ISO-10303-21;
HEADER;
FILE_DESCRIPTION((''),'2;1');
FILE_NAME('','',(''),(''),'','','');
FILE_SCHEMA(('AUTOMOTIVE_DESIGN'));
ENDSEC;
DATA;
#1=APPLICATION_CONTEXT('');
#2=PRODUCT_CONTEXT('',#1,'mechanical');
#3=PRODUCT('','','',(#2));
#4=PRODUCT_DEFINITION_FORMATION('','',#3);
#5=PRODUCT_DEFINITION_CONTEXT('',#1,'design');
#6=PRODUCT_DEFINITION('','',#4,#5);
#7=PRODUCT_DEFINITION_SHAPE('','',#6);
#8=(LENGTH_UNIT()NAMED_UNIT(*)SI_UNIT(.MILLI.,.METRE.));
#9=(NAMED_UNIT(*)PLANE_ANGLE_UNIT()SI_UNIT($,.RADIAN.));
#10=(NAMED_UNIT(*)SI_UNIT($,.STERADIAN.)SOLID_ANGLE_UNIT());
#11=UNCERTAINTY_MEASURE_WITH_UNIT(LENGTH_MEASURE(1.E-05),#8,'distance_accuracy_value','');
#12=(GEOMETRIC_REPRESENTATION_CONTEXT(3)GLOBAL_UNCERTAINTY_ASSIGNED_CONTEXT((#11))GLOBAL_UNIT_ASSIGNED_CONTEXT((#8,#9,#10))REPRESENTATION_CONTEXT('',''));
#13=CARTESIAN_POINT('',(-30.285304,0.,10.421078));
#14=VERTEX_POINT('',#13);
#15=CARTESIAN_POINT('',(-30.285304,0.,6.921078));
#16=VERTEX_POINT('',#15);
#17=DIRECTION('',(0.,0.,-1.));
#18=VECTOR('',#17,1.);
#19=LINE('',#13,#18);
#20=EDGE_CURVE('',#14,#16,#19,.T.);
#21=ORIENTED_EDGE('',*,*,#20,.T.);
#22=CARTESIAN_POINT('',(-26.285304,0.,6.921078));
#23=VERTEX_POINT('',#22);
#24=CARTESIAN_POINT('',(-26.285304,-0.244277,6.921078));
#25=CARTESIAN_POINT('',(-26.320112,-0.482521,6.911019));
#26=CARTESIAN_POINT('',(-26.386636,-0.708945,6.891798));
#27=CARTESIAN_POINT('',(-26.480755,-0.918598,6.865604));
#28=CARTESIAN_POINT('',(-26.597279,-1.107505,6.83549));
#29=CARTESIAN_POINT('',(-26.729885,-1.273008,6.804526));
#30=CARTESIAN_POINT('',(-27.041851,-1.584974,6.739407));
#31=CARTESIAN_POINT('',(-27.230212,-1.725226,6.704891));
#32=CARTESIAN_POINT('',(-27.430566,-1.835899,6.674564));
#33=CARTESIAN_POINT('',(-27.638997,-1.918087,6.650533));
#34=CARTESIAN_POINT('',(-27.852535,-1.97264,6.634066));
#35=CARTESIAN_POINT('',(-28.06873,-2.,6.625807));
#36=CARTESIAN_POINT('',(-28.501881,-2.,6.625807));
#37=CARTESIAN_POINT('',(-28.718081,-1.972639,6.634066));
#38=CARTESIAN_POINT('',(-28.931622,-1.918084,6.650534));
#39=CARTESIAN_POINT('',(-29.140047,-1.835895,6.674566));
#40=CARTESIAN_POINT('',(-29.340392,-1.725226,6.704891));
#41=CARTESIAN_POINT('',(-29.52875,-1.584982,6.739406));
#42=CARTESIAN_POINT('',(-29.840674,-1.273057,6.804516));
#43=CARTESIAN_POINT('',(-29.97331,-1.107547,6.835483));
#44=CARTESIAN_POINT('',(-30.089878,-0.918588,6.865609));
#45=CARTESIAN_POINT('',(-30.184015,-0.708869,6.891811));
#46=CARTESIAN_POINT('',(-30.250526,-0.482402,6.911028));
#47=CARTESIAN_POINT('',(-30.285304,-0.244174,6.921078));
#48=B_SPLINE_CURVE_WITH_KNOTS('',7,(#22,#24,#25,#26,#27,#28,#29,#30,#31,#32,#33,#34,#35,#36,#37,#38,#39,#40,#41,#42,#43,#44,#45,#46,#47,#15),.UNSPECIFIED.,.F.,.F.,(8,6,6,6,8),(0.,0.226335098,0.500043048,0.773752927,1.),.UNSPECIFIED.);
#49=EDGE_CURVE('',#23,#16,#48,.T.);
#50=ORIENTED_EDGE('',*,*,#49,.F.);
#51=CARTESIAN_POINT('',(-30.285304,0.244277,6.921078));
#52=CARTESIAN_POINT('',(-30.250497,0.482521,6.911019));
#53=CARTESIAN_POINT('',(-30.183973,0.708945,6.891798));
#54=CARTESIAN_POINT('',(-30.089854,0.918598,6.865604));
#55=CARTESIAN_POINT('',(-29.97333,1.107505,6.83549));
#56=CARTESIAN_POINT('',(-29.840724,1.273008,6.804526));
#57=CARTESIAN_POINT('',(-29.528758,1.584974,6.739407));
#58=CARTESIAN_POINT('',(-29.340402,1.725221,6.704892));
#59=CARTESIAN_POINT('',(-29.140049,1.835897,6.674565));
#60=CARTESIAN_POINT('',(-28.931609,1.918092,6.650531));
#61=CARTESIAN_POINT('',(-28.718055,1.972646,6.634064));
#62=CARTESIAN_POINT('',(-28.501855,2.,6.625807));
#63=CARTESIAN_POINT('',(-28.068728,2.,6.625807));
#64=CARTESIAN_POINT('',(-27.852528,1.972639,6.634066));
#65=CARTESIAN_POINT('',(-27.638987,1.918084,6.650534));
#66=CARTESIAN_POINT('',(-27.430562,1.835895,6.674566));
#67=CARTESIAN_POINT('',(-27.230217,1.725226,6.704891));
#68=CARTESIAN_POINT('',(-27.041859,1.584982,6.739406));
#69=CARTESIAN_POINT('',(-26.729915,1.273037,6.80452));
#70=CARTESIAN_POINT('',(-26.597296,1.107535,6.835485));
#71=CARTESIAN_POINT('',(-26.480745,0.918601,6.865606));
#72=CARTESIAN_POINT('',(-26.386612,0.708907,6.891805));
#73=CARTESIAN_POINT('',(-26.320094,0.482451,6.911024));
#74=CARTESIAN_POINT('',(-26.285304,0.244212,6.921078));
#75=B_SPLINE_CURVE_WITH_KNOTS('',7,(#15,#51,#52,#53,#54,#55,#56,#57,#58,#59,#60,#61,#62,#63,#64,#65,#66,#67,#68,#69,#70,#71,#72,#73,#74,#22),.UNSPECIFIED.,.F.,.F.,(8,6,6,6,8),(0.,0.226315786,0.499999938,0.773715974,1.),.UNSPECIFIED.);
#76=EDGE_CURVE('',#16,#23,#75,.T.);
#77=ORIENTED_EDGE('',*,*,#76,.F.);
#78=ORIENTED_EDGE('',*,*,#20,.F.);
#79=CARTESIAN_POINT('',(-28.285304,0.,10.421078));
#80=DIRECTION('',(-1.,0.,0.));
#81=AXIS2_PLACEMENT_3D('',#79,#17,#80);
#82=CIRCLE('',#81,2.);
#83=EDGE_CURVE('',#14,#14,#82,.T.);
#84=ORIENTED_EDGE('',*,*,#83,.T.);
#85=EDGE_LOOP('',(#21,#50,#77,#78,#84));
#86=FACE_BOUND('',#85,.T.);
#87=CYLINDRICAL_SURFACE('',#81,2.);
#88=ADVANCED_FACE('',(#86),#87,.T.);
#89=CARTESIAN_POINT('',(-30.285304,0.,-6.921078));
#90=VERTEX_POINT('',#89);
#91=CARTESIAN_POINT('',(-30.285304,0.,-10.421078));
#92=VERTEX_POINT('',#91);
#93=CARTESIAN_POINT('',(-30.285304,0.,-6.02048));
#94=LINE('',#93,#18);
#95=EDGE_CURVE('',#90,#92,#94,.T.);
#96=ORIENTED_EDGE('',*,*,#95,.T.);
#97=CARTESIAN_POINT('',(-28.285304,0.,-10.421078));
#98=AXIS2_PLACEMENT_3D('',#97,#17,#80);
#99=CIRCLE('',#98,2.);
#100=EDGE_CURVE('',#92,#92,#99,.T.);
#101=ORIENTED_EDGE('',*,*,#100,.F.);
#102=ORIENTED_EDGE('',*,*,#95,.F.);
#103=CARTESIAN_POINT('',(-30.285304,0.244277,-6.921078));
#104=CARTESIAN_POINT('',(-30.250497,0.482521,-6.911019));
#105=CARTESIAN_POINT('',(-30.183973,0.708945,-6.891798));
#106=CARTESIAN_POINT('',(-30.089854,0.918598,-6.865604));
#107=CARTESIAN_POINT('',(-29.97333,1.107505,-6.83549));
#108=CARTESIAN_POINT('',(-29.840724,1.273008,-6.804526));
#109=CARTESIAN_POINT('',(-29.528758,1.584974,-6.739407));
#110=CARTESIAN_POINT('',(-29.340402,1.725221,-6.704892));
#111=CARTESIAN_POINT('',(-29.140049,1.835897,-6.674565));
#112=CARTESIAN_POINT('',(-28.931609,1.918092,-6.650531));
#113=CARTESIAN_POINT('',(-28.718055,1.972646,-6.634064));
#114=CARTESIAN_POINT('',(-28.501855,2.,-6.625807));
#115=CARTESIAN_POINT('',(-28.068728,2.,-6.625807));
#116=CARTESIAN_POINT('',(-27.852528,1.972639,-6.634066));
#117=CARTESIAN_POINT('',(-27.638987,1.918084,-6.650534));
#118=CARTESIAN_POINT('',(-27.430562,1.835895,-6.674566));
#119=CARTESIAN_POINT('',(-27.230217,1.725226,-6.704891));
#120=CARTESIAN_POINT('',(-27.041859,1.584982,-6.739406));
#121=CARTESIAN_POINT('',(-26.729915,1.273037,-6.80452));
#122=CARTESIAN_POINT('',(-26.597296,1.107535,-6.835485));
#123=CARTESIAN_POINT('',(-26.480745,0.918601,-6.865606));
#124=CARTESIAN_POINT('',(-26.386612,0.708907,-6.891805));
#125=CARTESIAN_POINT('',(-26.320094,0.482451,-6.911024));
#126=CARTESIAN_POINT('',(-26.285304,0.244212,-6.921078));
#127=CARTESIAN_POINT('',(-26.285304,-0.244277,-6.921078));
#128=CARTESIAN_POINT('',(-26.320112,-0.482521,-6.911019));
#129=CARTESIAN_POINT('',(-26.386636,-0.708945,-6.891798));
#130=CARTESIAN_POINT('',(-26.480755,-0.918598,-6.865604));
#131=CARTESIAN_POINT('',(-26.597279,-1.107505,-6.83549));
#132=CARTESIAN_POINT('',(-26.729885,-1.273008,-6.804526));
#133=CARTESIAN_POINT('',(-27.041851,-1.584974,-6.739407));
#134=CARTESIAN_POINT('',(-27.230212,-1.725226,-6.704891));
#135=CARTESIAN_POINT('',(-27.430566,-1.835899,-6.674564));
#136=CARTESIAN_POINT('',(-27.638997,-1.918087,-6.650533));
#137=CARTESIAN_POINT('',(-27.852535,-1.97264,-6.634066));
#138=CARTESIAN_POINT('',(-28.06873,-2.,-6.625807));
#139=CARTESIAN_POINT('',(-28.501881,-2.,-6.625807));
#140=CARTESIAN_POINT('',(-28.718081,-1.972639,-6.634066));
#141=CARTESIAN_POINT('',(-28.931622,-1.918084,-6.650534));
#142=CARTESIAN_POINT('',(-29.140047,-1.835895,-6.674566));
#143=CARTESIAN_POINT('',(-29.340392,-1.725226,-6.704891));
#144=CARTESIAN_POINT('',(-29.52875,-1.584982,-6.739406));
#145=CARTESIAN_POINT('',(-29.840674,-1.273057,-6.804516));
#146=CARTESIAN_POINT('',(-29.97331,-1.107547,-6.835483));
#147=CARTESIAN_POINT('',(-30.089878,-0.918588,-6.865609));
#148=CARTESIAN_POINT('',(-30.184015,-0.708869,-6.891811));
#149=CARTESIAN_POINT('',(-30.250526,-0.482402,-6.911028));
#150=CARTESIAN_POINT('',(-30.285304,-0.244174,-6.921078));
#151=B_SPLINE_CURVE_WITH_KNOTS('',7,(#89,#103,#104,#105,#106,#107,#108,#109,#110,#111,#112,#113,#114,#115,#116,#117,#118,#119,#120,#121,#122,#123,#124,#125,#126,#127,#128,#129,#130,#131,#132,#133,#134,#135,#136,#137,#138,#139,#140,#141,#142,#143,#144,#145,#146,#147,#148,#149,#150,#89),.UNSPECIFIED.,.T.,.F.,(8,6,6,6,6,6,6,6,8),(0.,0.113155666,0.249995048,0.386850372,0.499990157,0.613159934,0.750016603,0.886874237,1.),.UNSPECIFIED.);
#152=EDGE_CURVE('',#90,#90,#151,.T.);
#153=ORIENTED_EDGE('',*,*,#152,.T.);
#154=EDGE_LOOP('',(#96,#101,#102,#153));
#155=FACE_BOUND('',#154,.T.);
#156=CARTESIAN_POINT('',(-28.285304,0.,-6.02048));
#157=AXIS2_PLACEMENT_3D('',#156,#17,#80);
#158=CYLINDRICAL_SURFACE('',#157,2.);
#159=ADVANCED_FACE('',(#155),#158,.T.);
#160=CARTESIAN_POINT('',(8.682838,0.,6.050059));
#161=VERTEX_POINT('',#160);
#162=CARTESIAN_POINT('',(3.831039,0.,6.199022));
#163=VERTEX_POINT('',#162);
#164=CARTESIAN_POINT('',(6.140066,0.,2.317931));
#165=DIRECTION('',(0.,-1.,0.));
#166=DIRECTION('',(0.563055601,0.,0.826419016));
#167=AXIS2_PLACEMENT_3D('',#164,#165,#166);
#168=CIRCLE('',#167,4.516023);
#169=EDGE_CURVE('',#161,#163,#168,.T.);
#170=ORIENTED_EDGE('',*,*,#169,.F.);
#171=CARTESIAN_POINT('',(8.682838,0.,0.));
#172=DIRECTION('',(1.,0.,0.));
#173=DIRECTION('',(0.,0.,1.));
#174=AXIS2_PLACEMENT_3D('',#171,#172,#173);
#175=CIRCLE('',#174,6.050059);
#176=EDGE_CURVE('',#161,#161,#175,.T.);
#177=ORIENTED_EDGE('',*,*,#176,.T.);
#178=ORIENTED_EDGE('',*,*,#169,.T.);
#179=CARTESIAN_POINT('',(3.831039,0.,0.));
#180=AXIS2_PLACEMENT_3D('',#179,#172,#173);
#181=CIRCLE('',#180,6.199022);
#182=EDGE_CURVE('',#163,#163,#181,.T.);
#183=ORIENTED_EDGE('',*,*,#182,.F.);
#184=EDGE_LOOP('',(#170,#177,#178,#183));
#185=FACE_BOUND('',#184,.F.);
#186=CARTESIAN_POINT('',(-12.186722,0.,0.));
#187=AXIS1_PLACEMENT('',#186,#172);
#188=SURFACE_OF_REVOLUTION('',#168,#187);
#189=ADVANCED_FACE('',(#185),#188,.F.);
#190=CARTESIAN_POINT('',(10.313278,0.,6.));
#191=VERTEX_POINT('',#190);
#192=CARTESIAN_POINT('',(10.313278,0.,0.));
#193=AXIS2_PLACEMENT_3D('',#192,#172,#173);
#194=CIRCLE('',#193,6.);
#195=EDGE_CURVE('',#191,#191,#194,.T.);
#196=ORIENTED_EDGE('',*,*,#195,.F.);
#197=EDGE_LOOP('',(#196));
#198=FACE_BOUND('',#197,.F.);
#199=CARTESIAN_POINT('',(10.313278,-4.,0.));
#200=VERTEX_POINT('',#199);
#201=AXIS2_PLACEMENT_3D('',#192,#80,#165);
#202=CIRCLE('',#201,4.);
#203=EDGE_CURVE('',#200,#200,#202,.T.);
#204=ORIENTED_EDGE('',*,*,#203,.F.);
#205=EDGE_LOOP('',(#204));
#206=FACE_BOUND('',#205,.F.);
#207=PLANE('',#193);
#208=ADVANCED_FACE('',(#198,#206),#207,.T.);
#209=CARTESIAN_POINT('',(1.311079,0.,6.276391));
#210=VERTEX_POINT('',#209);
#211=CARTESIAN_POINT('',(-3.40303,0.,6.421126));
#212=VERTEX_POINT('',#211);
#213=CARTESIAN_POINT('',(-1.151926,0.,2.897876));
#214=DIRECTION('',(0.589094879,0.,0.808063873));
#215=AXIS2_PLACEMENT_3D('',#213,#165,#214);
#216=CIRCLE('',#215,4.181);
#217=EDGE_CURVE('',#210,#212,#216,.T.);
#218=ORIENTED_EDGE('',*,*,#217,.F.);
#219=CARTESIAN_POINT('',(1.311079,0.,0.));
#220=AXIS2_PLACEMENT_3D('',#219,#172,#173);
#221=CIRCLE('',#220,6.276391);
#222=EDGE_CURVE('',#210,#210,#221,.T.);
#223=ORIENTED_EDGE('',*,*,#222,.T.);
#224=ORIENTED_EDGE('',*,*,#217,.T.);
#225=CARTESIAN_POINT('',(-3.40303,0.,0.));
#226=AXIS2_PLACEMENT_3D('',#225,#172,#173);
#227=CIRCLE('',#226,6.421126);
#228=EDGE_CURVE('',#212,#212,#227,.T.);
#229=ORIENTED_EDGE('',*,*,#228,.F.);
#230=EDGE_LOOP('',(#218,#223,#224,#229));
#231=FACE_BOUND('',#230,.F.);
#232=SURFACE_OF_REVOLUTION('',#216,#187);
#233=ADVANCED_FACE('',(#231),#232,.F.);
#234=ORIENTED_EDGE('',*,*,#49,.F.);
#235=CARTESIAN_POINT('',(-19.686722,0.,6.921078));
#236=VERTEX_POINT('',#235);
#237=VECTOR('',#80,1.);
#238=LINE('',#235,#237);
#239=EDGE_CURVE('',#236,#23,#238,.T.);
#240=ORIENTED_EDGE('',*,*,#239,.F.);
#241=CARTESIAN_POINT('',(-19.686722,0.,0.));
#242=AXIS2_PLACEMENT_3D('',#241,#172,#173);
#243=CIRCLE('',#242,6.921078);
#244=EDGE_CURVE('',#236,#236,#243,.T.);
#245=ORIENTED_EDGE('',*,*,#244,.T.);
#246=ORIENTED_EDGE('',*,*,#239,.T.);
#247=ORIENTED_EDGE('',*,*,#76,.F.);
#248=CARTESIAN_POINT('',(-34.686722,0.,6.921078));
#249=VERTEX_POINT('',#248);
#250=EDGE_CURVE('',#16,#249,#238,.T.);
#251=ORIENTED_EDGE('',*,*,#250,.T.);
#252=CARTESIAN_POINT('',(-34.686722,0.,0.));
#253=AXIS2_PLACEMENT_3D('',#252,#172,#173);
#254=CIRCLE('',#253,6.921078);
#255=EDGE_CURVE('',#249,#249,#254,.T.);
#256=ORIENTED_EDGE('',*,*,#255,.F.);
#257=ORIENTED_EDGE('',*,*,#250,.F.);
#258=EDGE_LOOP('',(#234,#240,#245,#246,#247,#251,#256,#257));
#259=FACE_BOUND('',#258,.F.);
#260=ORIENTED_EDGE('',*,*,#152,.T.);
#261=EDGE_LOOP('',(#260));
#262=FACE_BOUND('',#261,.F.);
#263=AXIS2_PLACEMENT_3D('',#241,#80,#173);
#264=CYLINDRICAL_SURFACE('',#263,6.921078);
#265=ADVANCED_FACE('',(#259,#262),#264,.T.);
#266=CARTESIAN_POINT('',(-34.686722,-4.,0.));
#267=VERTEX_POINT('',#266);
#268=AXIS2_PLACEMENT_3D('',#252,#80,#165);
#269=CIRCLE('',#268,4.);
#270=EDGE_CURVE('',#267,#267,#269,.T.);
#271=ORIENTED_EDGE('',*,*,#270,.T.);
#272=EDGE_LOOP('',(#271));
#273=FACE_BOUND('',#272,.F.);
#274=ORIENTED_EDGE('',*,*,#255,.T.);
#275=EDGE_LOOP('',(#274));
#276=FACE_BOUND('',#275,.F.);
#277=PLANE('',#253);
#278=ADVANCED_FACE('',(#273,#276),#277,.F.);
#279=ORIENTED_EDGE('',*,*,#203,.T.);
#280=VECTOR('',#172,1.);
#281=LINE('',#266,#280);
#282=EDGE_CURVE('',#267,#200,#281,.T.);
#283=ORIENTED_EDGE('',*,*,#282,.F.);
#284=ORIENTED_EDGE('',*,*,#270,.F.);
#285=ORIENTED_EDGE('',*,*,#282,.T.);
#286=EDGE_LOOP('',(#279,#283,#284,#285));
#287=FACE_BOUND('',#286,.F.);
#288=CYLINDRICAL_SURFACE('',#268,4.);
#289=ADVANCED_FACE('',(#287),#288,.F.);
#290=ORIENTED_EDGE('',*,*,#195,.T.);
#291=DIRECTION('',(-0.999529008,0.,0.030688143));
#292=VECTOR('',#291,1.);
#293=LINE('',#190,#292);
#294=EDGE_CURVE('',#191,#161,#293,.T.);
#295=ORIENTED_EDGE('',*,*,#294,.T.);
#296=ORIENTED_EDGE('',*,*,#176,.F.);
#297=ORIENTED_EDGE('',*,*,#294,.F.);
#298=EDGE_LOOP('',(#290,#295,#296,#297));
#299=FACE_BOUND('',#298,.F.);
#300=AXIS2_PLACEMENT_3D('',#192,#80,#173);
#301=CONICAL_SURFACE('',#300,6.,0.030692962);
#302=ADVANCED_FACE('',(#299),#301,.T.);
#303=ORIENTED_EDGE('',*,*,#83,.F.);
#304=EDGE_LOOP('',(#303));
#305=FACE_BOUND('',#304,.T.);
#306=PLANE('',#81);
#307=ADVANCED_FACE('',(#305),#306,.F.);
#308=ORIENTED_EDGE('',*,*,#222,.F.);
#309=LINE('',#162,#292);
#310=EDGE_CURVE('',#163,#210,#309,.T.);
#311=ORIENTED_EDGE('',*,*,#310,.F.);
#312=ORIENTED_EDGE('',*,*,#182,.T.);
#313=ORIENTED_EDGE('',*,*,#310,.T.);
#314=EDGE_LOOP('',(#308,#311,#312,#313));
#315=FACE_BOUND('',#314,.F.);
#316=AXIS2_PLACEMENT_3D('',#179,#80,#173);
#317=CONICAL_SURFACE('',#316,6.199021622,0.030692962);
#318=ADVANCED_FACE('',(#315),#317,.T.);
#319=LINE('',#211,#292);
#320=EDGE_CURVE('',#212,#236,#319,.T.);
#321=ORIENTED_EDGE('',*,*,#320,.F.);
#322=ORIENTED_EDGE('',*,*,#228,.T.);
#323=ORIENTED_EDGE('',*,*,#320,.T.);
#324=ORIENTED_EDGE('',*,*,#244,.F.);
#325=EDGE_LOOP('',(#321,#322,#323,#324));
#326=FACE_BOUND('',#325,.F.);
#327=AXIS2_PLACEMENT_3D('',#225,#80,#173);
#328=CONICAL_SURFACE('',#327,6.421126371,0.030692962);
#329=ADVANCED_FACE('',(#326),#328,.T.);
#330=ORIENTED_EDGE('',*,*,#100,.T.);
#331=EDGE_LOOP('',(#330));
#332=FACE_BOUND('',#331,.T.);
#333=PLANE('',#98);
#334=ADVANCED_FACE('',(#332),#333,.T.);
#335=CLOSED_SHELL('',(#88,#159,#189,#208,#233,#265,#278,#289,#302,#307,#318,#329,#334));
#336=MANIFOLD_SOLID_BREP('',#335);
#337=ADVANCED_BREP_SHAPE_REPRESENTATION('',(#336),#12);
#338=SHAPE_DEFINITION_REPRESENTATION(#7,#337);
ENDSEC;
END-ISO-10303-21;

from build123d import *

# Parameters (mm, degrees)
F4_R     = 4
F5_DEPTH = 45


# Not quite as in the source:
# - a feature names something its author has since deleted; it is built from what else it names


with BuildPart() as f1:
    # F0 (on Front) → F1 (revolve)
    with BuildSketch(Plane.XZ):
        with BuildLine():
            ThreePointArc((1.311079303, 6.2763909436), (-1.0236192616, 7.0769066725), (-3.4030299061, 6.4211263706))
            Line((-3.4030299061, 6.4211263706), (1.311079303, 6.2763909436))
        make_face()
        with BuildLine():
            Line((3.831038924, 6.1990216219), (8.6828378167, 6.0500587631))
            ThreePointArc((8.6828378167, 6.0500587631), (6.2786539333, 6.8318275323), (3.831038924, 6.1990216219))
        make_face()
        Polygon((-34.6867218614, 6.921078112), (-34.6867218614, 0), (10.3132781386, 0), (10.3132781386, 6), (8.6828378167, 6.0500587631), (3.831038924, 6.1990216219), (1.311079303, 6.2763909436), (-3.4030299061, 6.4211263706), (-19.6867218614, 6.921078112), align=None)
    revolve(axis=Axis((-12.1867218614, 0, 0), (1, 0, 0)))

    # F2 (on Front) → F3 (revolve)
    with BuildSketch(Plane.XZ):
        Polygon((-30.2853044122, -6.0204798356), (-30.2853044122, -6.921078112), (-30.2853044122, -10.421078112), (-28.2853044122, -10.421078112), (-28.2853044122, -6.921078112), (-28.2853044122, -6.0204798356), align=None)
        Polygon((-28.2853044122, 6.921078112), (-28.2853044122, 10.421078112), (-30.2853044122, 10.421078112), (-30.2853044122, 6.921078112), (-30.2853044122, 5.468968302), (-28.2853044122, 5.468968302), align=None)
    revolve(axis=Axis((-28.2853044122, 0, 8.671078112), (0, 0, -1)))

    # F4 (on face) → F5 (cut, through all)
    with BuildSketch(Plane(origin=(-34.6867218614, 0, 0), x_dir=(0, -1, 0), z_dir=(-1, 0, 0))):
        Circle(F4_R)
    extrude(amount=-F5_DEPTH, mode=Mode.SUBTRACT)


solid = f1.part
